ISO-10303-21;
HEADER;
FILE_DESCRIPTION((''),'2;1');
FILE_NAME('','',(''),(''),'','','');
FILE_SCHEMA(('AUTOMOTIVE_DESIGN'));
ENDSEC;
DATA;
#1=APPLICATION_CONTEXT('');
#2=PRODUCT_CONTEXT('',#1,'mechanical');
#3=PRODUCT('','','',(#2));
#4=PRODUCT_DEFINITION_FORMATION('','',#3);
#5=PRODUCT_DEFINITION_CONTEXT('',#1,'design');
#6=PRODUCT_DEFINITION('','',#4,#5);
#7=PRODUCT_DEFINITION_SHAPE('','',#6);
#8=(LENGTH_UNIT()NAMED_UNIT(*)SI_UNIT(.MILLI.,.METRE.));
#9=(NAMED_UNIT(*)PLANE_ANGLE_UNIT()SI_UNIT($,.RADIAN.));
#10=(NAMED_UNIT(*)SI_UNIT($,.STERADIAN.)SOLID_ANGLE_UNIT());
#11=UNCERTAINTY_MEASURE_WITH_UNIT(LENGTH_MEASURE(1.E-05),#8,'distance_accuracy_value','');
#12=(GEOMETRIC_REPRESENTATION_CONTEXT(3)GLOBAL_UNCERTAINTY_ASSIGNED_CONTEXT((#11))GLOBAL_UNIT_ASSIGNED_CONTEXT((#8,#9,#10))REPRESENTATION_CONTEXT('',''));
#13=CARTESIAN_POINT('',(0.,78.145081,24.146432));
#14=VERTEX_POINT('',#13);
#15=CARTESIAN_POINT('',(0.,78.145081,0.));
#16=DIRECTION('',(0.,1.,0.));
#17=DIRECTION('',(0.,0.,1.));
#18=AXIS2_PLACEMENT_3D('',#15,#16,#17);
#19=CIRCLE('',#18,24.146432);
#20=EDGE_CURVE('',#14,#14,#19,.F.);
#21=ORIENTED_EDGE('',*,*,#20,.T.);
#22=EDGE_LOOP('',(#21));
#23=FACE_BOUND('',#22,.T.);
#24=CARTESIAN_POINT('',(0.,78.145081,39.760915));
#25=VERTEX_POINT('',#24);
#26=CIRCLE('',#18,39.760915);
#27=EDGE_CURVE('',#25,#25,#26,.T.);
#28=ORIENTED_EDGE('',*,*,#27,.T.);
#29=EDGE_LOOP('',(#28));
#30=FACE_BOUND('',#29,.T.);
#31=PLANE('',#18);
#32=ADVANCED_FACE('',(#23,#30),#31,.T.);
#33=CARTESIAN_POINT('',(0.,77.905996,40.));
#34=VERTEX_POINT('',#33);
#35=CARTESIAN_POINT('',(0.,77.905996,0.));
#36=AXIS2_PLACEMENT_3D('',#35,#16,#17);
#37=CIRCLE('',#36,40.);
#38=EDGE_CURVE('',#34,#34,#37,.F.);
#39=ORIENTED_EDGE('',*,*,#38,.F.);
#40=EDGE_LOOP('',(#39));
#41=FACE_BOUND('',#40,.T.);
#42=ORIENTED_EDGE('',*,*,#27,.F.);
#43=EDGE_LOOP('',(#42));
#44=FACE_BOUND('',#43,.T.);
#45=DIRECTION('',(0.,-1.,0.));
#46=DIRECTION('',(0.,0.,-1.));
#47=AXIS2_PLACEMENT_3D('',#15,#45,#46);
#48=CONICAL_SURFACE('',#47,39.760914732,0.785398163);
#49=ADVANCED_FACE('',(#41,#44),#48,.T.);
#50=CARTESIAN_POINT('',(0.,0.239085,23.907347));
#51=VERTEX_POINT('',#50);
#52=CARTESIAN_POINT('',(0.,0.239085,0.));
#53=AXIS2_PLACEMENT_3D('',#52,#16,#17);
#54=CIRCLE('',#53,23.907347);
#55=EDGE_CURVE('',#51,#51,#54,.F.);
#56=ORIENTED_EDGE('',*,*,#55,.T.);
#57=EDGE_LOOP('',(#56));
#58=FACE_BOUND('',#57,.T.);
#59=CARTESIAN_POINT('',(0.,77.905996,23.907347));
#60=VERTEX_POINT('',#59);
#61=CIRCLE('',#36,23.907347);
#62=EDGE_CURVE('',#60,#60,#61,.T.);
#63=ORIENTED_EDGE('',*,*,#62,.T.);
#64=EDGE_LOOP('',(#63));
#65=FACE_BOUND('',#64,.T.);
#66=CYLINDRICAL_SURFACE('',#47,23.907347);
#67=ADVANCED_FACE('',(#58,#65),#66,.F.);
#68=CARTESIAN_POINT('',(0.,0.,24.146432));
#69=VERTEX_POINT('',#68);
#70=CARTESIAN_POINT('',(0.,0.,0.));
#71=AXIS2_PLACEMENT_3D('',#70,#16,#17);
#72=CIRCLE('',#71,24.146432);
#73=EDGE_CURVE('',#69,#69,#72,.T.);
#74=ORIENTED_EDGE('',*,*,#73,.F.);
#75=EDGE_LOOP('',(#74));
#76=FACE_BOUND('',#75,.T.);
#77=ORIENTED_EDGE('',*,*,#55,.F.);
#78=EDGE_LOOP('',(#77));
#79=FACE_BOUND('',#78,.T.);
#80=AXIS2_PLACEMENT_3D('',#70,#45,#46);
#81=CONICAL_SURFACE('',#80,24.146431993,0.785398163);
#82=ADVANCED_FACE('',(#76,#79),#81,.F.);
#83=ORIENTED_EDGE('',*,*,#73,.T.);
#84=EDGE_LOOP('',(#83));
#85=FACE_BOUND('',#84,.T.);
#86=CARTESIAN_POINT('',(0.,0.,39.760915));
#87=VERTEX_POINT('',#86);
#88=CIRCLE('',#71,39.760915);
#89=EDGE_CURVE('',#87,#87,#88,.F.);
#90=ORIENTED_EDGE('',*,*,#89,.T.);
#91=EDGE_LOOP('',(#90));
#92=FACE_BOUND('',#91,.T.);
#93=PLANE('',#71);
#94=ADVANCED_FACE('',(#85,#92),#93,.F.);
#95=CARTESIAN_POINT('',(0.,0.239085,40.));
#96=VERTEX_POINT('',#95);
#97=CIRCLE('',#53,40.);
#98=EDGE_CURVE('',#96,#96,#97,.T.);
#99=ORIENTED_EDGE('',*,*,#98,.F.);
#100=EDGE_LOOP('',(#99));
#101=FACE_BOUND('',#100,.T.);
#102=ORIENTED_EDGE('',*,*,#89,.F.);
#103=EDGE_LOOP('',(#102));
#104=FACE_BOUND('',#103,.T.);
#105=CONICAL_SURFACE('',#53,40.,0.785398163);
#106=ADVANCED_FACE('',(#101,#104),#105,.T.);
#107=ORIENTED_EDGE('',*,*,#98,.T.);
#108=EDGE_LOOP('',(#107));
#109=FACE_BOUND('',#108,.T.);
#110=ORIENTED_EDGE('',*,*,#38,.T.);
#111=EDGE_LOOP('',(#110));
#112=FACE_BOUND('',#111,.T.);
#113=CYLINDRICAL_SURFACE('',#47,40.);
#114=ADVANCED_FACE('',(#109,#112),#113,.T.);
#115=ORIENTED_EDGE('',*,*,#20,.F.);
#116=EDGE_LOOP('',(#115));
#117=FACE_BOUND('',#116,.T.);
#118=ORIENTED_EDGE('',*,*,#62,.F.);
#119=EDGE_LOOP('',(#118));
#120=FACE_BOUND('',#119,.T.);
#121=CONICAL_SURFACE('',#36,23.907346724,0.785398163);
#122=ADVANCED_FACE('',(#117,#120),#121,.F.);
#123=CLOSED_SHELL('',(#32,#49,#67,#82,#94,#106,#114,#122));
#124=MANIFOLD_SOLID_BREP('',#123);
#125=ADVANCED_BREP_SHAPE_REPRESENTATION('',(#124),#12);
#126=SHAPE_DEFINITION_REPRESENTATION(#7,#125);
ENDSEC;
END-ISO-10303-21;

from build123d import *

# Parameters (mm, degrees)
SKETCH1_R           = 40
BOSS_EXTRUDE1_DEPTH = 78.145080905
SKETCH2_R           = 23.907346724
CUT_EXTRUDE1_DEPTH  = 97.470999112
CHAMFER1_SIZE       = 0.239085268


with BuildPart() as part:
    # Sketch1 → Boss-Extrude1 (new body)
    with BuildSketch(Plane(origin=(0, 0, 0), x_dir=(1, 0, 0), z_dir=(0, 1, 0))):
        Circle(SKETCH1_R)
    extrude(amount=BOSS_EXTRUDE1_DEPTH)

    # Sketch2 → Cut-Extrude1 (cut, through all)
    with BuildSketch(Plane(origin=(0, 0, 0), x_dir=(1, 0, 0), z_dir=(0, 1, 0))):
        Circle(SKETCH2_R)
    extrude(amount=CUT_EXTRUDE1_DEPTH, mode=Mode.SUBTRACT)

    # Chamfer1
    chamfer1_edges = [part.edges().sort_by_distance(p)[0] for p in [
        (-23.907346724, 78.145080905, 0),
        (-23.907346724, 0, 0),
        (-40, 0, 0),
        (-40, 78.145080905, 0),
    ]]
    chamfer(chamfer1_edges, length=CHAMFER1_SIZE)


solid = part.part
